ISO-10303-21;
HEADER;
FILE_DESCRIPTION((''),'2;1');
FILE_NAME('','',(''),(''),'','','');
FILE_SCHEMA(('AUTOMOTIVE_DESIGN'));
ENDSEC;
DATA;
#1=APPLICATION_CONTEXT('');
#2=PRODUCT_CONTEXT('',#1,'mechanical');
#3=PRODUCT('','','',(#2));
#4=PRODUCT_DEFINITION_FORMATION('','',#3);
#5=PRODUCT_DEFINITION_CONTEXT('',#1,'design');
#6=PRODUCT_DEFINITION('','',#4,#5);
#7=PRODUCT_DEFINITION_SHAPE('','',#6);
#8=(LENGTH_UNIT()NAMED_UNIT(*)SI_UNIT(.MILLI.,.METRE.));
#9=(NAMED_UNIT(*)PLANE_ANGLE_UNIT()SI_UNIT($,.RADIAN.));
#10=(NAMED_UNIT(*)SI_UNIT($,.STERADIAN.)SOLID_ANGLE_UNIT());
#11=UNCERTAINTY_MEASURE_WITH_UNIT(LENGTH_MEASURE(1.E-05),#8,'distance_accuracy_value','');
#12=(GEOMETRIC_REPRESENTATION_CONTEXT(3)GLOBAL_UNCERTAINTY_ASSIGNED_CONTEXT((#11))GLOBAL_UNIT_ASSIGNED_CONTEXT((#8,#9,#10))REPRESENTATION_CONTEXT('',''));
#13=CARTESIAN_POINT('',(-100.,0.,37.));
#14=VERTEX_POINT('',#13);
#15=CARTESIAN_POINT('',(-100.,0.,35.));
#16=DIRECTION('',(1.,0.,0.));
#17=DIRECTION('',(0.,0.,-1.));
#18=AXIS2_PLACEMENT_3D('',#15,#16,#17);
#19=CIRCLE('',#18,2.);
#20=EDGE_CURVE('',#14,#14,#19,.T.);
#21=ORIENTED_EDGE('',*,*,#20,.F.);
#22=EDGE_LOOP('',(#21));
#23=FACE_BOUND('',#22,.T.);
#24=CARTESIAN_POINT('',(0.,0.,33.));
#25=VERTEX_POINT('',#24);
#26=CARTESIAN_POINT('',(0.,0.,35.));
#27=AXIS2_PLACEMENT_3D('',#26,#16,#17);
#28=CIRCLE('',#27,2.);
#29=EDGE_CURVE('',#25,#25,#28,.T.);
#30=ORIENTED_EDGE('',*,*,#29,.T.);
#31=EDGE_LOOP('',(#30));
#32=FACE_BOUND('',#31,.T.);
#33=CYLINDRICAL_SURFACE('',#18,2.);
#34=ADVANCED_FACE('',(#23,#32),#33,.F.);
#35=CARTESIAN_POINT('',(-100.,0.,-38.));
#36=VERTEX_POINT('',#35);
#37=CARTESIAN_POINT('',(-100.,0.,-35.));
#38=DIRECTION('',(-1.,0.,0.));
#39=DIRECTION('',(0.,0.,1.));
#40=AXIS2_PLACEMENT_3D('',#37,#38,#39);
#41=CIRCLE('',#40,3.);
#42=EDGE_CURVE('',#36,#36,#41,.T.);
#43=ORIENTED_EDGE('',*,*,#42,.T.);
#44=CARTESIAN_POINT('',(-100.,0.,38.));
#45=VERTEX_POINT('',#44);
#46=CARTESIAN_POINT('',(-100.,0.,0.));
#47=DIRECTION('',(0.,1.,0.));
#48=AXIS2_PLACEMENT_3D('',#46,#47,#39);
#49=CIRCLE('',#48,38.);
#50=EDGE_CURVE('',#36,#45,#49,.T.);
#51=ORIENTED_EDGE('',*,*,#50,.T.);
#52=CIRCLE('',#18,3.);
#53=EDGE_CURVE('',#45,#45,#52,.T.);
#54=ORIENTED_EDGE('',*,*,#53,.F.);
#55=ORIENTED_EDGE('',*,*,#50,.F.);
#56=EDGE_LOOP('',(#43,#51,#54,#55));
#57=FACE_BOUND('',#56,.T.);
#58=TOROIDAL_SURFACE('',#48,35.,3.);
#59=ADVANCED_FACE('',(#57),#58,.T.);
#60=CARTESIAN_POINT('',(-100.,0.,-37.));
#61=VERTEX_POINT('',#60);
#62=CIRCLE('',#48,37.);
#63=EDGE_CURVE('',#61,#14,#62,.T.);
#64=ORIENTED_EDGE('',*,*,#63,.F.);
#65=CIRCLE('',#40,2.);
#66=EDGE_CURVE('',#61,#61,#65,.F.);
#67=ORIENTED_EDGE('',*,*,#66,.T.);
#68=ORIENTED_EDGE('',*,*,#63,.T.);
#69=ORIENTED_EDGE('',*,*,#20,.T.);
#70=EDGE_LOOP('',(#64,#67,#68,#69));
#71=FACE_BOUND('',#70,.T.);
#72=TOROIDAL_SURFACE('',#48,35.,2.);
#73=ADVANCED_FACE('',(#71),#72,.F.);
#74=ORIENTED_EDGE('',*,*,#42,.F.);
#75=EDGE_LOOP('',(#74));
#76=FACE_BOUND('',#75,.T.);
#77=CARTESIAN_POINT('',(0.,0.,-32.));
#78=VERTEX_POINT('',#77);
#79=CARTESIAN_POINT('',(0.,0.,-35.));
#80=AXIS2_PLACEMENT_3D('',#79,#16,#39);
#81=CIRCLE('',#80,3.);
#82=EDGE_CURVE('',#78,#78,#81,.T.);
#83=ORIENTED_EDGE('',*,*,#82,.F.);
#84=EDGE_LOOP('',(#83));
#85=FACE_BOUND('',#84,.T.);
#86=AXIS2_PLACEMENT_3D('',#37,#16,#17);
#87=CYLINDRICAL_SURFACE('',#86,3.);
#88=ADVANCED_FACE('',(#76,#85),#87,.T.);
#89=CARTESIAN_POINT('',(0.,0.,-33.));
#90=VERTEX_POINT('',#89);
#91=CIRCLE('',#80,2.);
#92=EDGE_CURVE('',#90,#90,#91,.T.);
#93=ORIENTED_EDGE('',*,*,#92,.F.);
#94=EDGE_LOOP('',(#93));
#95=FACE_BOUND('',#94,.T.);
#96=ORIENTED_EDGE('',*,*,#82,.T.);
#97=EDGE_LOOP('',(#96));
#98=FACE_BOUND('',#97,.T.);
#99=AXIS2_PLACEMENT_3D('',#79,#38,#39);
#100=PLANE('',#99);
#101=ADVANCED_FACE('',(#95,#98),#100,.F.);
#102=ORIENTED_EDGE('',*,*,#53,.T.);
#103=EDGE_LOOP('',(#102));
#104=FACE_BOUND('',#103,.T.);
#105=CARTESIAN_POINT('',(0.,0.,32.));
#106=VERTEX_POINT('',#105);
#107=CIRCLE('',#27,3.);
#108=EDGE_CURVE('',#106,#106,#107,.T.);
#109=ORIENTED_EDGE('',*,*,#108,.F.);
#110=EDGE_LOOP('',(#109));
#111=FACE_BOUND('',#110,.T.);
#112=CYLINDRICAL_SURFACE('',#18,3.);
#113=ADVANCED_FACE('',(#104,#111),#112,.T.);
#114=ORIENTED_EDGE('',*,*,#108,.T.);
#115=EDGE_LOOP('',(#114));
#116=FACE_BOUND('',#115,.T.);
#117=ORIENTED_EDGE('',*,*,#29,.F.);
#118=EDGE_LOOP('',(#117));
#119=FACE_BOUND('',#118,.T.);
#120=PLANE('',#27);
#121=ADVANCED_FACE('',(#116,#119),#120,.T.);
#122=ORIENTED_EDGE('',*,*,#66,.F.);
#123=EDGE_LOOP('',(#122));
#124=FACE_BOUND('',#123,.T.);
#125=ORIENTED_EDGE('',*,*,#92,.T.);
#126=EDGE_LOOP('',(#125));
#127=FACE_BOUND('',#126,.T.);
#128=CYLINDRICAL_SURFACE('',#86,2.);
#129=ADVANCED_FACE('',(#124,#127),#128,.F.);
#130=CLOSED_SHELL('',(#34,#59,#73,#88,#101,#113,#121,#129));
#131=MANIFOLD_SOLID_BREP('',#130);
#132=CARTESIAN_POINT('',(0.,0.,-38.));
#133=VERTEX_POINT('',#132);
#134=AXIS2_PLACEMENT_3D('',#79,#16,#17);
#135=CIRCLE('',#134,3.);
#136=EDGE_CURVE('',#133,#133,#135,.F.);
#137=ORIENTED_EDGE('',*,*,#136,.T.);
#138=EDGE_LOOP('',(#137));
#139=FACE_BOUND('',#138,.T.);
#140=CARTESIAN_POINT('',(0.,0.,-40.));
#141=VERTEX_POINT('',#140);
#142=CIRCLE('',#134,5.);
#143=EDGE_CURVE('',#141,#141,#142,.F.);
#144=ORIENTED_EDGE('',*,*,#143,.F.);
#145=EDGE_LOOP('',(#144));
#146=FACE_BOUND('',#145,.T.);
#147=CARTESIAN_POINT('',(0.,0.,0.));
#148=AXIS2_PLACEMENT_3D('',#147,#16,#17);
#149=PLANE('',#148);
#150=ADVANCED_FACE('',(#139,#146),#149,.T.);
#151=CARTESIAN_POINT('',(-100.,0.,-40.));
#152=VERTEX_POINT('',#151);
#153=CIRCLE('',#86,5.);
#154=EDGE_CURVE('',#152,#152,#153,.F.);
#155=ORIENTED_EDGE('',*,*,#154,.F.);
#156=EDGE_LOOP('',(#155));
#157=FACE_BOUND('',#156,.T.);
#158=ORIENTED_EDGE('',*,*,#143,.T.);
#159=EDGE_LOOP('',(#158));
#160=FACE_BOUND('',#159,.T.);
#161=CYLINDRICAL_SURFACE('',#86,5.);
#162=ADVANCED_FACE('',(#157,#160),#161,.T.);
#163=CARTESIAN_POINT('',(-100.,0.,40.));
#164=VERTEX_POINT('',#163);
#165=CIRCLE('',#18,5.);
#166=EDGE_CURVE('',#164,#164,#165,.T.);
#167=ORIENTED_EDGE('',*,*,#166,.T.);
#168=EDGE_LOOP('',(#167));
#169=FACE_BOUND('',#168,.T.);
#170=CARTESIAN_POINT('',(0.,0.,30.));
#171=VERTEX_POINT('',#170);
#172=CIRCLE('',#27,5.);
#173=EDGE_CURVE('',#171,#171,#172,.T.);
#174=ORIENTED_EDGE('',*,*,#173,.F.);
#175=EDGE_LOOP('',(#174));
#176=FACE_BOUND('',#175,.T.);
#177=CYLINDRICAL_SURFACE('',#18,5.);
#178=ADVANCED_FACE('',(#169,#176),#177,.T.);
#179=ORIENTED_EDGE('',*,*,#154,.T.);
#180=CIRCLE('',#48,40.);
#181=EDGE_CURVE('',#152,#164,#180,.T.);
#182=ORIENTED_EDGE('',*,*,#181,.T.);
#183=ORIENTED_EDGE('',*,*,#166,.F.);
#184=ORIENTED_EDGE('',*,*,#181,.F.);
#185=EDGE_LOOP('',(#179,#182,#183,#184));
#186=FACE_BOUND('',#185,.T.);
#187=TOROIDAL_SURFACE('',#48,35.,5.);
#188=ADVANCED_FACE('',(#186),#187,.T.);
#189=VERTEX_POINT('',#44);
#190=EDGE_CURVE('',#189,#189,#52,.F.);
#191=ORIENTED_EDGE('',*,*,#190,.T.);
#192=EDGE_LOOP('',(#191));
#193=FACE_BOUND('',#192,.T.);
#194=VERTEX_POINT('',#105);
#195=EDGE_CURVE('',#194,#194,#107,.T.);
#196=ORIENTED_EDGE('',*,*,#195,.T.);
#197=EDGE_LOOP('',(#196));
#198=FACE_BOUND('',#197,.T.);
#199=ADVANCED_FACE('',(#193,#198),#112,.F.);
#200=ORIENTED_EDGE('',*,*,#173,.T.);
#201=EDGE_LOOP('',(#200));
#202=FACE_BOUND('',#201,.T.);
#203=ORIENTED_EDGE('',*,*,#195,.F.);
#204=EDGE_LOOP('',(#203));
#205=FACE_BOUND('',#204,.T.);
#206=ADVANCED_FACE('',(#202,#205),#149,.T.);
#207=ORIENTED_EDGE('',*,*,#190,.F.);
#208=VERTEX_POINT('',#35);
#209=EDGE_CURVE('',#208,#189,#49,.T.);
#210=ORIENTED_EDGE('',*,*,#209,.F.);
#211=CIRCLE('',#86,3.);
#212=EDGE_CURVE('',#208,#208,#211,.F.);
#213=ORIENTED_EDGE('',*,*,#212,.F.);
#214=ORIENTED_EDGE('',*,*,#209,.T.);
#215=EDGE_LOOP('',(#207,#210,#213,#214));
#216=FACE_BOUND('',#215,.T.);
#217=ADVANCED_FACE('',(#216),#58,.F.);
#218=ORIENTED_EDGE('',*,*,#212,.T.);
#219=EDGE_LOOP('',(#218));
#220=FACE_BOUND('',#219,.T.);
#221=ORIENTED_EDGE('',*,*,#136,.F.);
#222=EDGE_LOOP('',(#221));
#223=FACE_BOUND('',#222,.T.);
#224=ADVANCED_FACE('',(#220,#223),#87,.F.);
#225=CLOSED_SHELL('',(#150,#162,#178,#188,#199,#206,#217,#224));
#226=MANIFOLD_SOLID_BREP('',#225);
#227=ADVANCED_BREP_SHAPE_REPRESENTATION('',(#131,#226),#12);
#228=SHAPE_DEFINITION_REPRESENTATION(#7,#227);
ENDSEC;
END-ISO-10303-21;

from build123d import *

# Parameters (mm, degrees)
SCHIZZO1_R                     = 5
SCHIZZO1_R_2                   = 3
ESTRUSIONE_ESTRUSIONE1_DEPTH   = 100
ESTRUSIONE_ESTRUSIONE1_2_DEPTH = 100
SWEEP2_OUTLINE_R               = 5
SWEEP2_OUTLINE_R_2             = 3
SWEEP2_ANGLE                   = 180
SCHIZZO6_R                     = 3
SCHIZZO6_R_2                   = 2
ESTRUSIONE_ESTRUSIONE3_DEPTH   = 100
ESTRUSIONE_ESTRUSIONE3_2_DEPTH = 100
SWEEP3_OUTLINE_R               = 3
SWEEP3_OUTLINE_R_2             = 2
SWEEP3_ANGLE                   = 180


# Read off the part's stored shape, not the designer's step: Sweep2, Sweep3
with BuildPart() as part:
    # Schizzo1 → Estrusione-Estrusione1 (new body)
    with BuildSketch(Plane(origin=(0, 0, 0), x_dir=(0, 0, -1), z_dir=(1, 0, 0))):
        with Locations((35, 0)):
            Circle(SCHIZZO1_R)
        with Locations((35, 0)):
            Circle(SCHIZZO1_R_2, mode=Mode.SUBTRACT)
    extrude(amount=-ESTRUSIONE_ESTRUSIONE1_DEPTH)



with BuildPart() as body_2:
    # Schizzo1 → Estrusione-Estrusione1 2 (new body)
    with BuildSketch(Plane(origin=(0, 0, 0), x_dir=(0, 0, -1), z_dir=(1, 0, 0))):
        with Locations((-35, 0)):
            Circle(SCHIZZO1_R)
        with Locations((-35, 0)):
            Circle(SCHIZZO1_R_2, mode=Mode.SUBTRACT)
    extrude(amount=-ESTRUSIONE_ESTRUSIONE1_2_DEPTH)


with BuildPart() as part_1:
    add(part.part)

    add(body_2.part)  # Sweep2 merges body 2
    # Sweep2 outline → Sweep2 (revolve)
    with BuildSketch(Plane(origin=(-100, 0, 0), x_dir=(0, 0, -1), z_dir=(1, 0, 0))):
        with Locations((35, 0)):
            Circle(SWEEP2_OUTLINE_R)
        with Locations((35, 0)):
            Circle(SWEEP2_OUTLINE_R_2, mode=Mode.SUBTRACT)
    revolve(axis=Axis((-100, 0, 0), (0, 1, 0)), revolution_arc=SWEEP2_ANGLE)


with BuildPart() as body_2_2:
    # Schizzo6 → Estrusione-Estrusione3 (new body)
    with BuildSketch(Plane(origin=(0, 0, 0), x_dir=(0, 0, -1), z_dir=(1, 0, 0))):
        with Locations((-35, 0)):
            Circle(SCHIZZO6_R)
        with Locations((-35, 0)):
            Circle(SCHIZZO6_R_2, mode=Mode.SUBTRACT)
    extrude(amount=-ESTRUSIONE_ESTRUSIONE3_DEPTH)



with BuildPart() as body_3:
    # Schizzo6 → Estrusione-Estrusione3 2 (new body)
    with BuildSketch(Plane(origin=(0, 0, 0), x_dir=(0, 0, -1), z_dir=(1, 0, 0))):
        with Locations((35, 0)):
            Circle(SCHIZZO6_R)
        with Locations(Location((35, 0, 0), (0, 0, 180))):
            Circle(SCHIZZO6_R_2, mode=Mode.SUBTRACT)
    extrude(amount=-ESTRUSIONE_ESTRUSIONE3_2_DEPTH)


with BuildPart() as body_2_2_1:
    add(body_2_2.part)

    add(body_3.part)  # Sweep3 merges body 3
    # Sweep3 outline → Sweep3 (revolve)
    with BuildSketch(Plane(origin=(-100, 0, 0), x_dir=(0, 0, -1), z_dir=(1, 0, 0))):
        with Locations((35, 0)):
            Circle(SWEEP3_OUTLINE_R)
        with Locations((35, 0)):
            Circle(SWEEP3_OUTLINE_R_2, mode=Mode.SUBTRACT)
    revolve(axis=Axis((-100, 0, 0), (0, 1, 0)), revolution_arc=SWEEP3_ANGLE)


solid = Compound([part_1.part, body_2_2_1.part])
